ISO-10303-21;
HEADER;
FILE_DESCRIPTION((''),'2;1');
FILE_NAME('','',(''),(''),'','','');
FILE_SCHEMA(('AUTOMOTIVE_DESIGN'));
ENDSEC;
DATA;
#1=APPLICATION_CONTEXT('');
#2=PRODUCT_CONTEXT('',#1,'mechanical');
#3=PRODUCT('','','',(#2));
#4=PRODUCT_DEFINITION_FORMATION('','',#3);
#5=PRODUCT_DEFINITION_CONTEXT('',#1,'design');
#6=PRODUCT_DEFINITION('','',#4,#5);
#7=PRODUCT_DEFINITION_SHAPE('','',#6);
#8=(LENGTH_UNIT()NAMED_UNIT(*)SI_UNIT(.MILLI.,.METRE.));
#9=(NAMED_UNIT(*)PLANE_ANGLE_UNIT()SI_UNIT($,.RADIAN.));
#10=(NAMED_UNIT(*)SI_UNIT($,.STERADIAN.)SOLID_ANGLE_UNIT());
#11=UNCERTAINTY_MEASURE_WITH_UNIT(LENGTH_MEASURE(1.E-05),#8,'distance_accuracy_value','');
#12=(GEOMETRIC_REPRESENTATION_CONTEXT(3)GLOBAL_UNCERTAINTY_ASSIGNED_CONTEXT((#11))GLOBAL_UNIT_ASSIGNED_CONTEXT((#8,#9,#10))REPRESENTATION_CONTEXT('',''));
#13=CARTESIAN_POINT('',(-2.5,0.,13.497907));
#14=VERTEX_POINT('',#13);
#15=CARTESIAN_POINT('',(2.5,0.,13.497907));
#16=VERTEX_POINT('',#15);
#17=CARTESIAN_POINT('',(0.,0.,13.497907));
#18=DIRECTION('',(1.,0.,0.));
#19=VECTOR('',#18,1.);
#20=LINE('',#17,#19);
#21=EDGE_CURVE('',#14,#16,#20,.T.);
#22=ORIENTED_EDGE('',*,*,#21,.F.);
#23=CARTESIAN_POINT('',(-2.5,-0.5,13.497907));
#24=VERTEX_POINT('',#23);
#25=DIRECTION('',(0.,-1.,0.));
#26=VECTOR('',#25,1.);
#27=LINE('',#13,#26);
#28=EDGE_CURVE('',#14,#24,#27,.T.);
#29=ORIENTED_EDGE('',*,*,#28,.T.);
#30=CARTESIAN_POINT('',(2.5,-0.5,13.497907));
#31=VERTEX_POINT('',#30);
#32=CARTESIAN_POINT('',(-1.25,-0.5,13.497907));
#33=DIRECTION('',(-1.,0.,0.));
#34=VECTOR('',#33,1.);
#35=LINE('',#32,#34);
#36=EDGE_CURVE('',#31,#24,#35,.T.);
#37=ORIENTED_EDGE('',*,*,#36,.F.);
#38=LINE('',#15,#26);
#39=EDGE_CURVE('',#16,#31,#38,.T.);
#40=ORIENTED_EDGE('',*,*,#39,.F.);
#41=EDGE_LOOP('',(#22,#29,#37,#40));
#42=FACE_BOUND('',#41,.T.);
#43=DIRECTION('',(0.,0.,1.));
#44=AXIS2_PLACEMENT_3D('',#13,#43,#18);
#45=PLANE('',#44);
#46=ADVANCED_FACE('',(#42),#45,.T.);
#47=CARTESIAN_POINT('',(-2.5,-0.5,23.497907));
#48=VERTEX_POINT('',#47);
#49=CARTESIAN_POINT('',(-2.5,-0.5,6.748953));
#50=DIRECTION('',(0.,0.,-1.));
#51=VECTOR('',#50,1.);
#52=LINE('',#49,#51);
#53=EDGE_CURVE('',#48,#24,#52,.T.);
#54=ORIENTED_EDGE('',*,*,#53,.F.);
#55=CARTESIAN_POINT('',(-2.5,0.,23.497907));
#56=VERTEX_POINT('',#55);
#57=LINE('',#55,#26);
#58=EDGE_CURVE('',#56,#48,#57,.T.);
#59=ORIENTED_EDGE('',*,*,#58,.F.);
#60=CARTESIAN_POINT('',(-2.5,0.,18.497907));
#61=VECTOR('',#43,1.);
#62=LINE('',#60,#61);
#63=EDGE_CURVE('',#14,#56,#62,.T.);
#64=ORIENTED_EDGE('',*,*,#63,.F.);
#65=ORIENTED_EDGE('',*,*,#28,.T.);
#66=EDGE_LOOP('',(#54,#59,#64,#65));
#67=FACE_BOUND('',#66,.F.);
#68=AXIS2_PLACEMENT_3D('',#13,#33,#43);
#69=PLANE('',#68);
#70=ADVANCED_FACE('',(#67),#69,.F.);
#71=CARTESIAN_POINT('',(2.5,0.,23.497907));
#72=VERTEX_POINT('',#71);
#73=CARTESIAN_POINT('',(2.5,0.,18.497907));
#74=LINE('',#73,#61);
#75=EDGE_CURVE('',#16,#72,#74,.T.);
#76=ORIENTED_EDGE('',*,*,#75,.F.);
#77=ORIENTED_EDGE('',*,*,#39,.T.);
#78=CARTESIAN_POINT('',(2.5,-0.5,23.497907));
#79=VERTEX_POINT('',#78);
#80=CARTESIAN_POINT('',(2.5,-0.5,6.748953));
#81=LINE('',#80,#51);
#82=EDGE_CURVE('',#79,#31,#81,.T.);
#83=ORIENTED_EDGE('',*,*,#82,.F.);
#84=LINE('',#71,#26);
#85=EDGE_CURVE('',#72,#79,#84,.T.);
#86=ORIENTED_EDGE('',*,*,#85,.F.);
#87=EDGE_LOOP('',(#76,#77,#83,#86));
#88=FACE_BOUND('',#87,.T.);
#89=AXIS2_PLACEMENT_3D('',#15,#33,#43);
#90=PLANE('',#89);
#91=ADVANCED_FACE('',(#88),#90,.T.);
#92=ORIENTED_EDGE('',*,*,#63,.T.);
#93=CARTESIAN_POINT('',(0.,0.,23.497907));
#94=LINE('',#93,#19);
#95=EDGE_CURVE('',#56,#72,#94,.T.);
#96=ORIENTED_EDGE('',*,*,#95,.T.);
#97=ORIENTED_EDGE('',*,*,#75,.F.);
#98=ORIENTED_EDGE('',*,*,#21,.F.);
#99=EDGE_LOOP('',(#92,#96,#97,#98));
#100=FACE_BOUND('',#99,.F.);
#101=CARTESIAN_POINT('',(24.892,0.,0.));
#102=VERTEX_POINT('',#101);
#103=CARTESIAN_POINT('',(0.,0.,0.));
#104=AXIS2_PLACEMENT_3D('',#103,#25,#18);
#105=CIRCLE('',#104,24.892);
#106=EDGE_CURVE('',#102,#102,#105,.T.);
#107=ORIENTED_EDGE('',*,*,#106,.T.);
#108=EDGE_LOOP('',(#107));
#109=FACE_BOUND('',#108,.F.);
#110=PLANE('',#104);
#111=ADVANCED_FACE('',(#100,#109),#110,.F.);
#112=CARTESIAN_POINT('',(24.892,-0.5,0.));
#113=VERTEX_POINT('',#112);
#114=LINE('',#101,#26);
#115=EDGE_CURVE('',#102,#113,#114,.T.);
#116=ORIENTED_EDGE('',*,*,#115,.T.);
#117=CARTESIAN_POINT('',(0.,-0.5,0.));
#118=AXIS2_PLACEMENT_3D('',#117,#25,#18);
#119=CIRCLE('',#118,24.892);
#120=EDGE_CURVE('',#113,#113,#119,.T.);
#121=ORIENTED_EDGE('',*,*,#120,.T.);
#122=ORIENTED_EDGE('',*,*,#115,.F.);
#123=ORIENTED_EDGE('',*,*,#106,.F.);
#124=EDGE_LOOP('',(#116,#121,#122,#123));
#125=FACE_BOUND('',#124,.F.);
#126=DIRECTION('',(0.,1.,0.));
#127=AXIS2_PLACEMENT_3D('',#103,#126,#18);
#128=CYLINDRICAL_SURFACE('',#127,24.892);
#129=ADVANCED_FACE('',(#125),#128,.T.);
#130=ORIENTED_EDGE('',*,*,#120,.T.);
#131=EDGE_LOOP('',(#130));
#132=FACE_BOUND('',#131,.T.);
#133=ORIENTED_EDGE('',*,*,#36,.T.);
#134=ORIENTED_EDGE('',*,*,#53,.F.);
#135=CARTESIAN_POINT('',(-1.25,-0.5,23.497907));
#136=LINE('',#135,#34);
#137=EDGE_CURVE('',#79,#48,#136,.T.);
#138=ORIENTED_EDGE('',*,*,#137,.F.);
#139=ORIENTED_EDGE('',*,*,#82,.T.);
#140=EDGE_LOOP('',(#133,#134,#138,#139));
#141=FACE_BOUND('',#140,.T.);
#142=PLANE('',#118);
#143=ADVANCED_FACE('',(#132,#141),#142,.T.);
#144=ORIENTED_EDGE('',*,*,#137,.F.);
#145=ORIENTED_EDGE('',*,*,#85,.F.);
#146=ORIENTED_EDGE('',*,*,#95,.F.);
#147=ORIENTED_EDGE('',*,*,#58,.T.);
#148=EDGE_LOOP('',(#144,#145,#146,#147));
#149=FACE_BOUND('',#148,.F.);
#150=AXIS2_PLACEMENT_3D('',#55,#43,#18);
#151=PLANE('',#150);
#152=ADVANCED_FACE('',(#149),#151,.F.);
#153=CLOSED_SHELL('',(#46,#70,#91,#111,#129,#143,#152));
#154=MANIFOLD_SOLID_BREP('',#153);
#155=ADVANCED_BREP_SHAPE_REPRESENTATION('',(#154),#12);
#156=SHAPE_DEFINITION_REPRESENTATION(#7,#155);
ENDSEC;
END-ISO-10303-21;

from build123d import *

# Parameters (mm, degrees)
F2_R     = 24.892
F5_DEPTH = 0.5
F1_W     = 5
F1_H     = 10
F6_DEPTH = 2.6162


# Not quite as in the source:
# - the program builds the solid bodies; features that only make, move or delete a surface that nothing else refers to are left out


with BuildPart() as f5:
    # F2 (on Front) → F5 (new body)
    with BuildSketch(Plane.XZ):
        Circle(F2_R)
    extrude(amount=F5_DEPTH)

    # F1 (on Front) → F6 (cut)
    with BuildSketch(Plane.XZ):
        with Locations((0, 18.4979066253)):
            Rectangle(F1_W, F1_H)
    extrude(amount=F6_DEPTH, mode=Mode.SUBTRACT)


solid = f5.part
